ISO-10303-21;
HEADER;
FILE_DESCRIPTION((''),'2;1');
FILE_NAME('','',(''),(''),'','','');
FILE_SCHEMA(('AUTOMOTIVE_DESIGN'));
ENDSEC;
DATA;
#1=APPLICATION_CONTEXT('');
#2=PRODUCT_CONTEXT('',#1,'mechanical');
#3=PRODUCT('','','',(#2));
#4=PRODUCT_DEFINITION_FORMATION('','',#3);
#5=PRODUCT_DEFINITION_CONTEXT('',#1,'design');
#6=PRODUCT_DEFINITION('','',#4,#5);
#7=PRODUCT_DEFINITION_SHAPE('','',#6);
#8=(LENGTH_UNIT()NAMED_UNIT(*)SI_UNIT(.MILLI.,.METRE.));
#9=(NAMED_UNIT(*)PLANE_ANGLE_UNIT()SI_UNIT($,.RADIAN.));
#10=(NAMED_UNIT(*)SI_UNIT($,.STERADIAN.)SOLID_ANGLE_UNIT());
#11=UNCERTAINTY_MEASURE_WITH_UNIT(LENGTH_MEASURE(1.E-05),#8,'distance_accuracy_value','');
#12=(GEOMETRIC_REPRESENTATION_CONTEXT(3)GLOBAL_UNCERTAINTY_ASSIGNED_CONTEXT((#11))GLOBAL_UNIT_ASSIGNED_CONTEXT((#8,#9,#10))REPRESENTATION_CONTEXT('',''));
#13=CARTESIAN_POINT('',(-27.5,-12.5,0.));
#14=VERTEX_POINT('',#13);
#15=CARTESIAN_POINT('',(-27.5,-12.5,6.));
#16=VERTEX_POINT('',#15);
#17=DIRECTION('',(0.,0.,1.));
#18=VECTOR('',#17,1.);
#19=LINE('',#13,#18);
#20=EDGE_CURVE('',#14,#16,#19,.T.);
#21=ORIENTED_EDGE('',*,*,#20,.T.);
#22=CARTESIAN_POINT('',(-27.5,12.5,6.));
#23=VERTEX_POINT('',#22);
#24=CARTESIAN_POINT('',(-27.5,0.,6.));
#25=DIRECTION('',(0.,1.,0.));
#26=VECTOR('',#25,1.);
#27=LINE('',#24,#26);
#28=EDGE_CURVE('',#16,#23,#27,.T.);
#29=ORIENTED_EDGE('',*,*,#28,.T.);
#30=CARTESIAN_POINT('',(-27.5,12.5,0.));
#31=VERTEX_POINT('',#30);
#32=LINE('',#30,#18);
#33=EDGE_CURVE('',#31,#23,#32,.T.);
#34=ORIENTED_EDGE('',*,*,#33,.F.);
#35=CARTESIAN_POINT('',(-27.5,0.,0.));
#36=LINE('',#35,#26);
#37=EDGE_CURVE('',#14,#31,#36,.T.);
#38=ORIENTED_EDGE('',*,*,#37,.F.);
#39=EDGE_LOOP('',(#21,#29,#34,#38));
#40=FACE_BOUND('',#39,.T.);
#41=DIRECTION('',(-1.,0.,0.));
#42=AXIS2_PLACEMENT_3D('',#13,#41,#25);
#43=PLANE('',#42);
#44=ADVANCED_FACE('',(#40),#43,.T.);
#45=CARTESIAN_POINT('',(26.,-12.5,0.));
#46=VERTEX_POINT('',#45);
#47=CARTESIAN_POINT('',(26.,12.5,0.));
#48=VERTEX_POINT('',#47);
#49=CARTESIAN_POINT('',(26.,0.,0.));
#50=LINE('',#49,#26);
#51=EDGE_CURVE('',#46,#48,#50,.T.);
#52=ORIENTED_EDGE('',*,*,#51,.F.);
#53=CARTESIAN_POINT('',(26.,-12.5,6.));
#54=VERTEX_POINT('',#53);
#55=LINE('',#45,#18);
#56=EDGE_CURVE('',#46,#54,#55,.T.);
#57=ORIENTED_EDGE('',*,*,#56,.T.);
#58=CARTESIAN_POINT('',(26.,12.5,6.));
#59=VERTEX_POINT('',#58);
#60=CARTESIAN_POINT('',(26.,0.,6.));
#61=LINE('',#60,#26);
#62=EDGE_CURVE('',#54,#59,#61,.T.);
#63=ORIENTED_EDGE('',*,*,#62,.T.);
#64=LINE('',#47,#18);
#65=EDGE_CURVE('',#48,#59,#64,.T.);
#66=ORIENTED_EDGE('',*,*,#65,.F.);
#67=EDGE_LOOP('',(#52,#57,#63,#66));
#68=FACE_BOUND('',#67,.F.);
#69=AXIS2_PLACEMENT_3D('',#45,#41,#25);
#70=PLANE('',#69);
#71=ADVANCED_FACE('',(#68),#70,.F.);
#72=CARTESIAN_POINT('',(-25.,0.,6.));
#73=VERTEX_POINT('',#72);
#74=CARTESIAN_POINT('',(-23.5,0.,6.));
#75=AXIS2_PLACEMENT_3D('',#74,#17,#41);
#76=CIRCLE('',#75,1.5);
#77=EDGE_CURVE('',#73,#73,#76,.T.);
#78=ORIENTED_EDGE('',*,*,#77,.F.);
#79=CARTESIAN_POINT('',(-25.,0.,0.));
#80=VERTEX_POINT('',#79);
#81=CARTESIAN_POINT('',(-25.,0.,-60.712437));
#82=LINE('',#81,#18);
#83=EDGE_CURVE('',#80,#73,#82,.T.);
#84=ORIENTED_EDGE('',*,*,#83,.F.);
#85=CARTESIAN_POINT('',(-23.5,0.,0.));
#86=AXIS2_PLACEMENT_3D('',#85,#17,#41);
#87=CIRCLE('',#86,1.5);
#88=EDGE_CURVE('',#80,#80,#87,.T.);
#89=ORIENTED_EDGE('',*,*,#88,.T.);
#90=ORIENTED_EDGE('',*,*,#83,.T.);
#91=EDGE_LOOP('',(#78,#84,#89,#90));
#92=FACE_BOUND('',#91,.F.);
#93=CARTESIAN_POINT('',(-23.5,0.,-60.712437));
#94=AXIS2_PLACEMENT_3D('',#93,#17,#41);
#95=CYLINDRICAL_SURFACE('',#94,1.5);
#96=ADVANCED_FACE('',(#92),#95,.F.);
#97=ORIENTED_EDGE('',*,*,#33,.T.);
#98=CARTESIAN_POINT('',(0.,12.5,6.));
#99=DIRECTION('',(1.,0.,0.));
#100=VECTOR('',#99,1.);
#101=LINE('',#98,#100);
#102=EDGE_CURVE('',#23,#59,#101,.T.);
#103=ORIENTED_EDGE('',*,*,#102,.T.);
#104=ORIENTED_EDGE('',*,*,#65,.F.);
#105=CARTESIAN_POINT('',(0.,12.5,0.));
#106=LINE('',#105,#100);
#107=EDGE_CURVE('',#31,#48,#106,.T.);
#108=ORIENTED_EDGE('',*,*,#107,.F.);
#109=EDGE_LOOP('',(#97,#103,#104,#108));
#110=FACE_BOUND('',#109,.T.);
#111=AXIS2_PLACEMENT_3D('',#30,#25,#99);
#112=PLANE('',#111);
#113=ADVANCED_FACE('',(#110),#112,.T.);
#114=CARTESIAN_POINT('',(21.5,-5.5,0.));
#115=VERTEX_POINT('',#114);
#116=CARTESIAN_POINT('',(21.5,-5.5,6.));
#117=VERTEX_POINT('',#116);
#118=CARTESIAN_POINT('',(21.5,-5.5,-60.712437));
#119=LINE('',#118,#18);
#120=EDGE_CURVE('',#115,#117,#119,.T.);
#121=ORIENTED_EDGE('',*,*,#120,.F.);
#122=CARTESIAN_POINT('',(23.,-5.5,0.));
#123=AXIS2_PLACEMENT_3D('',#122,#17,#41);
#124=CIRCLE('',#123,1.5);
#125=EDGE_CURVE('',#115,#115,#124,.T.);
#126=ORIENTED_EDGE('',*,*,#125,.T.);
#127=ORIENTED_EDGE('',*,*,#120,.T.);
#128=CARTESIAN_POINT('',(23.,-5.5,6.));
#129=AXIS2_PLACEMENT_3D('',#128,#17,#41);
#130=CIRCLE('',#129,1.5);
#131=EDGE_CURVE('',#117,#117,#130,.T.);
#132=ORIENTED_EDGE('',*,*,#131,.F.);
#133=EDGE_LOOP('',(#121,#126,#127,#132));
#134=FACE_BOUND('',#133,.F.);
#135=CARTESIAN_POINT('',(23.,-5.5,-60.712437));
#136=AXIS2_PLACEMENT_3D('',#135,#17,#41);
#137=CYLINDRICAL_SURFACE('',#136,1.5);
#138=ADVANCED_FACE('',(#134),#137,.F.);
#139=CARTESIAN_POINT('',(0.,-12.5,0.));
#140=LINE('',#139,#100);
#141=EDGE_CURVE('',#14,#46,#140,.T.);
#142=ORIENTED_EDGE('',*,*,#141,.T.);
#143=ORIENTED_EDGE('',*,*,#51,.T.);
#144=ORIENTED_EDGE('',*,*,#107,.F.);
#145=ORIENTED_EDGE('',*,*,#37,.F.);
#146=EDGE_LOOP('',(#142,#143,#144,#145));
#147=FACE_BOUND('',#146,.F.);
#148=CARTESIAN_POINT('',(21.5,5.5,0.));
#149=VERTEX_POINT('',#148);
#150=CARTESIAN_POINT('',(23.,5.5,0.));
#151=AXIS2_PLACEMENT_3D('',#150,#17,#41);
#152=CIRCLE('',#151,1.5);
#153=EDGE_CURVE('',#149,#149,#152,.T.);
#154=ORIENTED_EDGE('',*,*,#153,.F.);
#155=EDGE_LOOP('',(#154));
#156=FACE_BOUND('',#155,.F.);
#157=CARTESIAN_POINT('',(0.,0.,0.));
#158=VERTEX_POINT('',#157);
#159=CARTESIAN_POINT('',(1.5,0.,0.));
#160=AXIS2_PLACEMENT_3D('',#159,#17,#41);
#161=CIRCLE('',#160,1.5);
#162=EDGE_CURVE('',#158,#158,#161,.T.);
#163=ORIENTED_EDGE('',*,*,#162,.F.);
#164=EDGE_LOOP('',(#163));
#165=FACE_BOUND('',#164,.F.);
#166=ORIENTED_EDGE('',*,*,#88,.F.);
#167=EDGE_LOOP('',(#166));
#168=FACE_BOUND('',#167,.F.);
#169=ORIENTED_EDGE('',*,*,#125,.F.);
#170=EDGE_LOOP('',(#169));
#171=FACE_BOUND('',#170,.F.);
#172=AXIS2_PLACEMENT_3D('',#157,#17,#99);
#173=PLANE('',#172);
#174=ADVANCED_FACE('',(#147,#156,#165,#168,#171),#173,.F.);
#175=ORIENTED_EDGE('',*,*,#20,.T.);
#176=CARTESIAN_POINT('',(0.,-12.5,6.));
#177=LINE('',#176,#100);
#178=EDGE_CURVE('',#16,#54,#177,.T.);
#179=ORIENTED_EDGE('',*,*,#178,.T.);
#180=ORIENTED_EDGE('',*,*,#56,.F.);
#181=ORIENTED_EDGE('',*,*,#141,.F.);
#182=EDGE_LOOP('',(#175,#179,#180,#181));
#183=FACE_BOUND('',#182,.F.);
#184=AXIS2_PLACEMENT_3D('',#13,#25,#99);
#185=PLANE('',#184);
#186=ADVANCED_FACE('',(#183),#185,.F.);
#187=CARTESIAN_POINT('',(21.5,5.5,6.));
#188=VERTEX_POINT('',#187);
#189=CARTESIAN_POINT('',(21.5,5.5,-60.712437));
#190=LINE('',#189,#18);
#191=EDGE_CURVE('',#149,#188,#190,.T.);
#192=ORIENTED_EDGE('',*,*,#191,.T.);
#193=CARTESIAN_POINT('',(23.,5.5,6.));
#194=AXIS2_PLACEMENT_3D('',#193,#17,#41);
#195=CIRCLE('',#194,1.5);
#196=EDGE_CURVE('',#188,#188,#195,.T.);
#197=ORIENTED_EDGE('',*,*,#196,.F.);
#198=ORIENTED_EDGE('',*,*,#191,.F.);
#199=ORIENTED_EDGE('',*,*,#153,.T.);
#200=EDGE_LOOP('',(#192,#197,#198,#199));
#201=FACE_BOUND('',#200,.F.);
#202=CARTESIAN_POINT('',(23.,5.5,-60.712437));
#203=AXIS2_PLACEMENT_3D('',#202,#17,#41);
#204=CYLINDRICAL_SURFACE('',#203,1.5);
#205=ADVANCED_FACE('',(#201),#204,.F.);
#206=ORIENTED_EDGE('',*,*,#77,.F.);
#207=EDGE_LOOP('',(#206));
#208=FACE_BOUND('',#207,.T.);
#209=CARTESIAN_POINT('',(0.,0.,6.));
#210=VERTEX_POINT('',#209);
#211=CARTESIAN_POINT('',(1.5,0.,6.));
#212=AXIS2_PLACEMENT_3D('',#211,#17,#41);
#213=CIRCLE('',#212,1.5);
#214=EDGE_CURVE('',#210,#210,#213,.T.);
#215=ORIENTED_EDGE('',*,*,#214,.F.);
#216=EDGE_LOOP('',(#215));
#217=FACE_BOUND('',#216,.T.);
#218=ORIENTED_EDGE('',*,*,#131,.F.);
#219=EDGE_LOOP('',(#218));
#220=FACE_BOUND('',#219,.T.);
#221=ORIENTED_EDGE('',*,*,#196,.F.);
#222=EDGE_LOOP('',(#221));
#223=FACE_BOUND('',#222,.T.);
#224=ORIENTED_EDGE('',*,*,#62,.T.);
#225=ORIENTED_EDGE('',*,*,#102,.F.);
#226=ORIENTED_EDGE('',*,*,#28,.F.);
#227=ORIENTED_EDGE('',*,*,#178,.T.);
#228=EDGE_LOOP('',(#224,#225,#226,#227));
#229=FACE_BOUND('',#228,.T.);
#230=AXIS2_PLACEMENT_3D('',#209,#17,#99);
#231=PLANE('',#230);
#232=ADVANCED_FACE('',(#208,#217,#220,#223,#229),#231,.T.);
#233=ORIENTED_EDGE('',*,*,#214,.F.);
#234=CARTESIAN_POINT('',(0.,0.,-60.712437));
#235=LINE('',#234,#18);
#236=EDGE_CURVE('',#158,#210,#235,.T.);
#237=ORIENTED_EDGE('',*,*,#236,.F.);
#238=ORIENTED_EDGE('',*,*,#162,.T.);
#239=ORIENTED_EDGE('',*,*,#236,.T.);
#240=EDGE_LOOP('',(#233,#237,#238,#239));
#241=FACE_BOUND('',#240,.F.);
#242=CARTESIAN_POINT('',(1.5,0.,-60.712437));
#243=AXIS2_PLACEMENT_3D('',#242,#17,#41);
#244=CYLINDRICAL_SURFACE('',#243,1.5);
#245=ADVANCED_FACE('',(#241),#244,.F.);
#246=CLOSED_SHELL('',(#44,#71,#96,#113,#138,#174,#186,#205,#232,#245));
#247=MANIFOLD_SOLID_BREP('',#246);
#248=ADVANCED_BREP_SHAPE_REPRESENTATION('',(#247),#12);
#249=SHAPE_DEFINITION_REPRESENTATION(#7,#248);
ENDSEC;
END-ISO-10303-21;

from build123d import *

# Parameters (mm, degrees)
F0_W     = 55
F0_H     = 25
F1_DEPTH = 6
F2_D     = 3
F3_DEPTH = 1.5


# Not quite as in the source:
# - a feature names something its author has since deleted; it is built from what else it names


with BuildPart() as f1:
    # F0 (on Top) → F1 (new body)
    with BuildSketch(Plane.XY):
        Rectangle(F0_W, F0_H)
    extrude(amount=F1_DEPTH)

    # F2 (through all)
    with Locations(Plane(origin=(0, 0, 0), x_dir=(1, 0, 0), z_dir=(0, 0, -1))):
        with Locations((-23.5, 0), (23, -5.5), (23, 5.5), (1.5, 0)):
            Hole(F2_D / 2)

    # F3 (cut): a face of the model
    f3_faces = [f1.faces().sort_by_distance(p)[0] for p in [
        (27.5, 0, 3),
    ]]
    extrude(f3_faces, amount=-F3_DEPTH, mode=Mode.SUBTRACT)


solid = f1.part
